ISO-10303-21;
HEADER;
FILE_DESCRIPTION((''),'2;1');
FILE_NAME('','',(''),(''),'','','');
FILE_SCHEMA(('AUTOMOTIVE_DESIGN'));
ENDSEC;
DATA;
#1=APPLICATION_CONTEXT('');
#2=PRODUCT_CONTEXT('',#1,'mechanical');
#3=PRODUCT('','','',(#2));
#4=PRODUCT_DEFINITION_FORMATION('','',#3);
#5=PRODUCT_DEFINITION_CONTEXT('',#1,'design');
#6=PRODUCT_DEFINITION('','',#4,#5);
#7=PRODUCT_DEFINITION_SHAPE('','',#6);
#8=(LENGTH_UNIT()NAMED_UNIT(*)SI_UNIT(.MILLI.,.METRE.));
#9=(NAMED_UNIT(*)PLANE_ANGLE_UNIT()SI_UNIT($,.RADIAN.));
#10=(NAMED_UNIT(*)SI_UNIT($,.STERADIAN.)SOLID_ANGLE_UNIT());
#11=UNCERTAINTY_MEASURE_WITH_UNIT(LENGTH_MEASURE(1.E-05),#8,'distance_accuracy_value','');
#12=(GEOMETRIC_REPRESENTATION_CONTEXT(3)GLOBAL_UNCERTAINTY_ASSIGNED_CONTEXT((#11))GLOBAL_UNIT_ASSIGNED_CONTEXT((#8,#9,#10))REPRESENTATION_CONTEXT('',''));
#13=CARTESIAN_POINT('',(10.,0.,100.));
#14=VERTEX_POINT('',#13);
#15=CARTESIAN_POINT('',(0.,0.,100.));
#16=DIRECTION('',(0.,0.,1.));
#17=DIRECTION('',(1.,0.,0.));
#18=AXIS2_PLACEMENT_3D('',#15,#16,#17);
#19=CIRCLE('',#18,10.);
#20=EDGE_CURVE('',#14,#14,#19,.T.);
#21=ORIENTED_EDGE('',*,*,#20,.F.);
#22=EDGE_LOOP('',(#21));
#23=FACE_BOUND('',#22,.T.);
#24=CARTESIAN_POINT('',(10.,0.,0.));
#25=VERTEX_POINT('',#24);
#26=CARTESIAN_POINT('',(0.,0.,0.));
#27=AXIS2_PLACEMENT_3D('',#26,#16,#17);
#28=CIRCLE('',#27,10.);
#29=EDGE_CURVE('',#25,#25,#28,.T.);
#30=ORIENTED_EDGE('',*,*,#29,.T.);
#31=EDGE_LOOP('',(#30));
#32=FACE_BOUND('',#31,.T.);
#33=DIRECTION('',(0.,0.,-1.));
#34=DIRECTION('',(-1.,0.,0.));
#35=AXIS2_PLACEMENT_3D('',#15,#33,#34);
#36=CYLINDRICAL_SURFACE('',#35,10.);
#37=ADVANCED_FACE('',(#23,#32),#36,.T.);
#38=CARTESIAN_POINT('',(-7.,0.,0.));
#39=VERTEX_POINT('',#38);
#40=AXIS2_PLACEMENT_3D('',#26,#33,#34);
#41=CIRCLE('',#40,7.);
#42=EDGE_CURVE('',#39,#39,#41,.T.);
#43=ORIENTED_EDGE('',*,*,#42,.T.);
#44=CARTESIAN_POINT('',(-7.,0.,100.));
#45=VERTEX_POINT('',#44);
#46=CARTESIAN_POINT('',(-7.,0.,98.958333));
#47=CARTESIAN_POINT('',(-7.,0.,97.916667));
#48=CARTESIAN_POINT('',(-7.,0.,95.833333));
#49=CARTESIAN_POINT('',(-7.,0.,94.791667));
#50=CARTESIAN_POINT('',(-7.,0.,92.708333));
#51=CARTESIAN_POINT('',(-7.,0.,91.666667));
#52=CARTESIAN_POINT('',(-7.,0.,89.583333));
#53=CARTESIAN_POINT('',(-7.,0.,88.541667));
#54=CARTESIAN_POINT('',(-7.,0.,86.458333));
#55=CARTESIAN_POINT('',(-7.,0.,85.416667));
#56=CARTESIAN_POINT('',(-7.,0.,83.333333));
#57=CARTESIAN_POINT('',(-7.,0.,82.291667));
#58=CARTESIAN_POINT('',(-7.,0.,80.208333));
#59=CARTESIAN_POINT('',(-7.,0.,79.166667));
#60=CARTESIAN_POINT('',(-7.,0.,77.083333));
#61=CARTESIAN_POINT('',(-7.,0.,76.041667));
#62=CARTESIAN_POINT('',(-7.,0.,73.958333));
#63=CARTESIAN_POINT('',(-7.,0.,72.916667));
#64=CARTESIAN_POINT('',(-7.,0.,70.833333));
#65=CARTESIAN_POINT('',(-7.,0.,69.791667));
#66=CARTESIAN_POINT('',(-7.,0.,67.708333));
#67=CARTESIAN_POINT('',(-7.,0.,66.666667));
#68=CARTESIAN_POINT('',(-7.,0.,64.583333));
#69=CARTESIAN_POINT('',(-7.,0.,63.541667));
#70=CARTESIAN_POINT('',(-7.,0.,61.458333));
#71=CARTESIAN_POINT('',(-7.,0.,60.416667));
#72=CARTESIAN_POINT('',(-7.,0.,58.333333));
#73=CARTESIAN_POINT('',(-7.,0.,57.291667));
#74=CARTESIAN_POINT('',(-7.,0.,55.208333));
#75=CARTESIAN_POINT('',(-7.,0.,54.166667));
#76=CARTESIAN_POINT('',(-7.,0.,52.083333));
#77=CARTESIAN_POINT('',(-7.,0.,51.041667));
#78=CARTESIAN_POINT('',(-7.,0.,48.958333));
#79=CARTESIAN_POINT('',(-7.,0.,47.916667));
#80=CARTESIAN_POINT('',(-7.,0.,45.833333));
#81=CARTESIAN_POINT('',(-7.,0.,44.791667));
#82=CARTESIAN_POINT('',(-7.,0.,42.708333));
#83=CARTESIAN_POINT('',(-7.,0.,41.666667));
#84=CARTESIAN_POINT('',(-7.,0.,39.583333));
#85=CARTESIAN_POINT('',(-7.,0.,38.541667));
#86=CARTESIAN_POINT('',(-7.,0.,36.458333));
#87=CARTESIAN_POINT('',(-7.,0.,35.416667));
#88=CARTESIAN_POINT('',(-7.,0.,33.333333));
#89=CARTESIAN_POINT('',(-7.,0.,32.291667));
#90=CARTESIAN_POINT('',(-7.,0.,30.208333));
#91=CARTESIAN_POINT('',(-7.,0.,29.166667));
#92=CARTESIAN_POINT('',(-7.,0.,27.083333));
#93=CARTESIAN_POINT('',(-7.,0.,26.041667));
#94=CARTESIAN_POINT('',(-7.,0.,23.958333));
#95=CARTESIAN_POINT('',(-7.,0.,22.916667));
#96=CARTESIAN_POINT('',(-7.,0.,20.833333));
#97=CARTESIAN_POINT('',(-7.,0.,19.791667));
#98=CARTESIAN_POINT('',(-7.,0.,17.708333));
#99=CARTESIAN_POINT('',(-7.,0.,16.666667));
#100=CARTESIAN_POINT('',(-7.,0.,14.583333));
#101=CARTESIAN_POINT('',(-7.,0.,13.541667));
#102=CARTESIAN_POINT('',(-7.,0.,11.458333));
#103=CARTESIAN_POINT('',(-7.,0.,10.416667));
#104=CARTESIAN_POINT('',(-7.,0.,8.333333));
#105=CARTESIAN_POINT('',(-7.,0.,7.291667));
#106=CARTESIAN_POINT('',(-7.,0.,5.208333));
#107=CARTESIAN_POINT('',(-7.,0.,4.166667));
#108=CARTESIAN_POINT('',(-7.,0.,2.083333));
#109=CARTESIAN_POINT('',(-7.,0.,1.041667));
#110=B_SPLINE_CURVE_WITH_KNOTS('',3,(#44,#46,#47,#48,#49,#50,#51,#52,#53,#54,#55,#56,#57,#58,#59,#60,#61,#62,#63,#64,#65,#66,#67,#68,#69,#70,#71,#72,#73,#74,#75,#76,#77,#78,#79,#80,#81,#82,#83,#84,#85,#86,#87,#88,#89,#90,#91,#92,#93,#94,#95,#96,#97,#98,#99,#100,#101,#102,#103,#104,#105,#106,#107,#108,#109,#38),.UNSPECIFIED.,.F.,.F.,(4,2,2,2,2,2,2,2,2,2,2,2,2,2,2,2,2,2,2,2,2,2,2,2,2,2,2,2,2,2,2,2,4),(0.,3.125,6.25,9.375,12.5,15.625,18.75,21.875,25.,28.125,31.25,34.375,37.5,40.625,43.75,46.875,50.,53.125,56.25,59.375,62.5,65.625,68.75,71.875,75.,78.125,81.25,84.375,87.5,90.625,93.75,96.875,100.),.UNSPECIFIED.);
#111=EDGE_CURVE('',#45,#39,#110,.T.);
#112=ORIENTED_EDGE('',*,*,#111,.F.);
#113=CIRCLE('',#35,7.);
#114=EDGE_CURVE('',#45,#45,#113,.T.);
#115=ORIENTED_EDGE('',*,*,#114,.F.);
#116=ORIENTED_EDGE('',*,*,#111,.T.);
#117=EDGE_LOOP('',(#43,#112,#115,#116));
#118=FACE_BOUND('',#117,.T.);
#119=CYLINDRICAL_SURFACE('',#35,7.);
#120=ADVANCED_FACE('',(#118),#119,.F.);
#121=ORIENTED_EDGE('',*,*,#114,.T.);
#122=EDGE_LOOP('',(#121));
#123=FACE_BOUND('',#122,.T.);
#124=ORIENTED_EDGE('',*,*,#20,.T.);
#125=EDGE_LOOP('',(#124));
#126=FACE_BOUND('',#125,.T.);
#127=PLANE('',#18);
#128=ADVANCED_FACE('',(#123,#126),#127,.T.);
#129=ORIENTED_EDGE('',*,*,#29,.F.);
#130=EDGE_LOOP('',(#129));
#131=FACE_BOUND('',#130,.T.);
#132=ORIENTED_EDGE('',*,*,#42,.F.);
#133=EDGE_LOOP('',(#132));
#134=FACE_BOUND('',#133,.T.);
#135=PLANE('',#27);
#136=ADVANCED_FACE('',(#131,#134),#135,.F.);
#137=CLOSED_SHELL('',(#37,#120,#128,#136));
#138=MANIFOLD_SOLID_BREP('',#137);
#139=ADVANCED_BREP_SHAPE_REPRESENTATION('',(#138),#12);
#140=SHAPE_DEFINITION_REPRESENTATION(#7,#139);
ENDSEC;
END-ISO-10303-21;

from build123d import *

# Parameters (mm, degrees)
SKETCH1_R              = 10
BOSS_EXTRUDE1_DEPTH    = 100
CUT_EXTRUDE1_OUTLINE_R = 7
CUT_EXTRUDE1_DEPTH     = 100


# Read off the part's stored shape, not the designer's step: Cut-Extrude1
with BuildPart() as part:
    # Sketch1 → Boss-Extrude1 (new body)
    with BuildSketch(Plane.XY):
        Circle(SKETCH1_R)
    extrude(amount=BOSS_EXTRUDE1_DEPTH)

    # Cut-Extrude1 outline → Cut-Extrude1 (cut)
    with BuildSketch(Plane.XY):
        Circle(CUT_EXTRUDE1_OUTLINE_R)
    extrude(amount=CUT_EXTRUDE1_DEPTH, mode=Mode.SUBTRACT)


solid = part.part
